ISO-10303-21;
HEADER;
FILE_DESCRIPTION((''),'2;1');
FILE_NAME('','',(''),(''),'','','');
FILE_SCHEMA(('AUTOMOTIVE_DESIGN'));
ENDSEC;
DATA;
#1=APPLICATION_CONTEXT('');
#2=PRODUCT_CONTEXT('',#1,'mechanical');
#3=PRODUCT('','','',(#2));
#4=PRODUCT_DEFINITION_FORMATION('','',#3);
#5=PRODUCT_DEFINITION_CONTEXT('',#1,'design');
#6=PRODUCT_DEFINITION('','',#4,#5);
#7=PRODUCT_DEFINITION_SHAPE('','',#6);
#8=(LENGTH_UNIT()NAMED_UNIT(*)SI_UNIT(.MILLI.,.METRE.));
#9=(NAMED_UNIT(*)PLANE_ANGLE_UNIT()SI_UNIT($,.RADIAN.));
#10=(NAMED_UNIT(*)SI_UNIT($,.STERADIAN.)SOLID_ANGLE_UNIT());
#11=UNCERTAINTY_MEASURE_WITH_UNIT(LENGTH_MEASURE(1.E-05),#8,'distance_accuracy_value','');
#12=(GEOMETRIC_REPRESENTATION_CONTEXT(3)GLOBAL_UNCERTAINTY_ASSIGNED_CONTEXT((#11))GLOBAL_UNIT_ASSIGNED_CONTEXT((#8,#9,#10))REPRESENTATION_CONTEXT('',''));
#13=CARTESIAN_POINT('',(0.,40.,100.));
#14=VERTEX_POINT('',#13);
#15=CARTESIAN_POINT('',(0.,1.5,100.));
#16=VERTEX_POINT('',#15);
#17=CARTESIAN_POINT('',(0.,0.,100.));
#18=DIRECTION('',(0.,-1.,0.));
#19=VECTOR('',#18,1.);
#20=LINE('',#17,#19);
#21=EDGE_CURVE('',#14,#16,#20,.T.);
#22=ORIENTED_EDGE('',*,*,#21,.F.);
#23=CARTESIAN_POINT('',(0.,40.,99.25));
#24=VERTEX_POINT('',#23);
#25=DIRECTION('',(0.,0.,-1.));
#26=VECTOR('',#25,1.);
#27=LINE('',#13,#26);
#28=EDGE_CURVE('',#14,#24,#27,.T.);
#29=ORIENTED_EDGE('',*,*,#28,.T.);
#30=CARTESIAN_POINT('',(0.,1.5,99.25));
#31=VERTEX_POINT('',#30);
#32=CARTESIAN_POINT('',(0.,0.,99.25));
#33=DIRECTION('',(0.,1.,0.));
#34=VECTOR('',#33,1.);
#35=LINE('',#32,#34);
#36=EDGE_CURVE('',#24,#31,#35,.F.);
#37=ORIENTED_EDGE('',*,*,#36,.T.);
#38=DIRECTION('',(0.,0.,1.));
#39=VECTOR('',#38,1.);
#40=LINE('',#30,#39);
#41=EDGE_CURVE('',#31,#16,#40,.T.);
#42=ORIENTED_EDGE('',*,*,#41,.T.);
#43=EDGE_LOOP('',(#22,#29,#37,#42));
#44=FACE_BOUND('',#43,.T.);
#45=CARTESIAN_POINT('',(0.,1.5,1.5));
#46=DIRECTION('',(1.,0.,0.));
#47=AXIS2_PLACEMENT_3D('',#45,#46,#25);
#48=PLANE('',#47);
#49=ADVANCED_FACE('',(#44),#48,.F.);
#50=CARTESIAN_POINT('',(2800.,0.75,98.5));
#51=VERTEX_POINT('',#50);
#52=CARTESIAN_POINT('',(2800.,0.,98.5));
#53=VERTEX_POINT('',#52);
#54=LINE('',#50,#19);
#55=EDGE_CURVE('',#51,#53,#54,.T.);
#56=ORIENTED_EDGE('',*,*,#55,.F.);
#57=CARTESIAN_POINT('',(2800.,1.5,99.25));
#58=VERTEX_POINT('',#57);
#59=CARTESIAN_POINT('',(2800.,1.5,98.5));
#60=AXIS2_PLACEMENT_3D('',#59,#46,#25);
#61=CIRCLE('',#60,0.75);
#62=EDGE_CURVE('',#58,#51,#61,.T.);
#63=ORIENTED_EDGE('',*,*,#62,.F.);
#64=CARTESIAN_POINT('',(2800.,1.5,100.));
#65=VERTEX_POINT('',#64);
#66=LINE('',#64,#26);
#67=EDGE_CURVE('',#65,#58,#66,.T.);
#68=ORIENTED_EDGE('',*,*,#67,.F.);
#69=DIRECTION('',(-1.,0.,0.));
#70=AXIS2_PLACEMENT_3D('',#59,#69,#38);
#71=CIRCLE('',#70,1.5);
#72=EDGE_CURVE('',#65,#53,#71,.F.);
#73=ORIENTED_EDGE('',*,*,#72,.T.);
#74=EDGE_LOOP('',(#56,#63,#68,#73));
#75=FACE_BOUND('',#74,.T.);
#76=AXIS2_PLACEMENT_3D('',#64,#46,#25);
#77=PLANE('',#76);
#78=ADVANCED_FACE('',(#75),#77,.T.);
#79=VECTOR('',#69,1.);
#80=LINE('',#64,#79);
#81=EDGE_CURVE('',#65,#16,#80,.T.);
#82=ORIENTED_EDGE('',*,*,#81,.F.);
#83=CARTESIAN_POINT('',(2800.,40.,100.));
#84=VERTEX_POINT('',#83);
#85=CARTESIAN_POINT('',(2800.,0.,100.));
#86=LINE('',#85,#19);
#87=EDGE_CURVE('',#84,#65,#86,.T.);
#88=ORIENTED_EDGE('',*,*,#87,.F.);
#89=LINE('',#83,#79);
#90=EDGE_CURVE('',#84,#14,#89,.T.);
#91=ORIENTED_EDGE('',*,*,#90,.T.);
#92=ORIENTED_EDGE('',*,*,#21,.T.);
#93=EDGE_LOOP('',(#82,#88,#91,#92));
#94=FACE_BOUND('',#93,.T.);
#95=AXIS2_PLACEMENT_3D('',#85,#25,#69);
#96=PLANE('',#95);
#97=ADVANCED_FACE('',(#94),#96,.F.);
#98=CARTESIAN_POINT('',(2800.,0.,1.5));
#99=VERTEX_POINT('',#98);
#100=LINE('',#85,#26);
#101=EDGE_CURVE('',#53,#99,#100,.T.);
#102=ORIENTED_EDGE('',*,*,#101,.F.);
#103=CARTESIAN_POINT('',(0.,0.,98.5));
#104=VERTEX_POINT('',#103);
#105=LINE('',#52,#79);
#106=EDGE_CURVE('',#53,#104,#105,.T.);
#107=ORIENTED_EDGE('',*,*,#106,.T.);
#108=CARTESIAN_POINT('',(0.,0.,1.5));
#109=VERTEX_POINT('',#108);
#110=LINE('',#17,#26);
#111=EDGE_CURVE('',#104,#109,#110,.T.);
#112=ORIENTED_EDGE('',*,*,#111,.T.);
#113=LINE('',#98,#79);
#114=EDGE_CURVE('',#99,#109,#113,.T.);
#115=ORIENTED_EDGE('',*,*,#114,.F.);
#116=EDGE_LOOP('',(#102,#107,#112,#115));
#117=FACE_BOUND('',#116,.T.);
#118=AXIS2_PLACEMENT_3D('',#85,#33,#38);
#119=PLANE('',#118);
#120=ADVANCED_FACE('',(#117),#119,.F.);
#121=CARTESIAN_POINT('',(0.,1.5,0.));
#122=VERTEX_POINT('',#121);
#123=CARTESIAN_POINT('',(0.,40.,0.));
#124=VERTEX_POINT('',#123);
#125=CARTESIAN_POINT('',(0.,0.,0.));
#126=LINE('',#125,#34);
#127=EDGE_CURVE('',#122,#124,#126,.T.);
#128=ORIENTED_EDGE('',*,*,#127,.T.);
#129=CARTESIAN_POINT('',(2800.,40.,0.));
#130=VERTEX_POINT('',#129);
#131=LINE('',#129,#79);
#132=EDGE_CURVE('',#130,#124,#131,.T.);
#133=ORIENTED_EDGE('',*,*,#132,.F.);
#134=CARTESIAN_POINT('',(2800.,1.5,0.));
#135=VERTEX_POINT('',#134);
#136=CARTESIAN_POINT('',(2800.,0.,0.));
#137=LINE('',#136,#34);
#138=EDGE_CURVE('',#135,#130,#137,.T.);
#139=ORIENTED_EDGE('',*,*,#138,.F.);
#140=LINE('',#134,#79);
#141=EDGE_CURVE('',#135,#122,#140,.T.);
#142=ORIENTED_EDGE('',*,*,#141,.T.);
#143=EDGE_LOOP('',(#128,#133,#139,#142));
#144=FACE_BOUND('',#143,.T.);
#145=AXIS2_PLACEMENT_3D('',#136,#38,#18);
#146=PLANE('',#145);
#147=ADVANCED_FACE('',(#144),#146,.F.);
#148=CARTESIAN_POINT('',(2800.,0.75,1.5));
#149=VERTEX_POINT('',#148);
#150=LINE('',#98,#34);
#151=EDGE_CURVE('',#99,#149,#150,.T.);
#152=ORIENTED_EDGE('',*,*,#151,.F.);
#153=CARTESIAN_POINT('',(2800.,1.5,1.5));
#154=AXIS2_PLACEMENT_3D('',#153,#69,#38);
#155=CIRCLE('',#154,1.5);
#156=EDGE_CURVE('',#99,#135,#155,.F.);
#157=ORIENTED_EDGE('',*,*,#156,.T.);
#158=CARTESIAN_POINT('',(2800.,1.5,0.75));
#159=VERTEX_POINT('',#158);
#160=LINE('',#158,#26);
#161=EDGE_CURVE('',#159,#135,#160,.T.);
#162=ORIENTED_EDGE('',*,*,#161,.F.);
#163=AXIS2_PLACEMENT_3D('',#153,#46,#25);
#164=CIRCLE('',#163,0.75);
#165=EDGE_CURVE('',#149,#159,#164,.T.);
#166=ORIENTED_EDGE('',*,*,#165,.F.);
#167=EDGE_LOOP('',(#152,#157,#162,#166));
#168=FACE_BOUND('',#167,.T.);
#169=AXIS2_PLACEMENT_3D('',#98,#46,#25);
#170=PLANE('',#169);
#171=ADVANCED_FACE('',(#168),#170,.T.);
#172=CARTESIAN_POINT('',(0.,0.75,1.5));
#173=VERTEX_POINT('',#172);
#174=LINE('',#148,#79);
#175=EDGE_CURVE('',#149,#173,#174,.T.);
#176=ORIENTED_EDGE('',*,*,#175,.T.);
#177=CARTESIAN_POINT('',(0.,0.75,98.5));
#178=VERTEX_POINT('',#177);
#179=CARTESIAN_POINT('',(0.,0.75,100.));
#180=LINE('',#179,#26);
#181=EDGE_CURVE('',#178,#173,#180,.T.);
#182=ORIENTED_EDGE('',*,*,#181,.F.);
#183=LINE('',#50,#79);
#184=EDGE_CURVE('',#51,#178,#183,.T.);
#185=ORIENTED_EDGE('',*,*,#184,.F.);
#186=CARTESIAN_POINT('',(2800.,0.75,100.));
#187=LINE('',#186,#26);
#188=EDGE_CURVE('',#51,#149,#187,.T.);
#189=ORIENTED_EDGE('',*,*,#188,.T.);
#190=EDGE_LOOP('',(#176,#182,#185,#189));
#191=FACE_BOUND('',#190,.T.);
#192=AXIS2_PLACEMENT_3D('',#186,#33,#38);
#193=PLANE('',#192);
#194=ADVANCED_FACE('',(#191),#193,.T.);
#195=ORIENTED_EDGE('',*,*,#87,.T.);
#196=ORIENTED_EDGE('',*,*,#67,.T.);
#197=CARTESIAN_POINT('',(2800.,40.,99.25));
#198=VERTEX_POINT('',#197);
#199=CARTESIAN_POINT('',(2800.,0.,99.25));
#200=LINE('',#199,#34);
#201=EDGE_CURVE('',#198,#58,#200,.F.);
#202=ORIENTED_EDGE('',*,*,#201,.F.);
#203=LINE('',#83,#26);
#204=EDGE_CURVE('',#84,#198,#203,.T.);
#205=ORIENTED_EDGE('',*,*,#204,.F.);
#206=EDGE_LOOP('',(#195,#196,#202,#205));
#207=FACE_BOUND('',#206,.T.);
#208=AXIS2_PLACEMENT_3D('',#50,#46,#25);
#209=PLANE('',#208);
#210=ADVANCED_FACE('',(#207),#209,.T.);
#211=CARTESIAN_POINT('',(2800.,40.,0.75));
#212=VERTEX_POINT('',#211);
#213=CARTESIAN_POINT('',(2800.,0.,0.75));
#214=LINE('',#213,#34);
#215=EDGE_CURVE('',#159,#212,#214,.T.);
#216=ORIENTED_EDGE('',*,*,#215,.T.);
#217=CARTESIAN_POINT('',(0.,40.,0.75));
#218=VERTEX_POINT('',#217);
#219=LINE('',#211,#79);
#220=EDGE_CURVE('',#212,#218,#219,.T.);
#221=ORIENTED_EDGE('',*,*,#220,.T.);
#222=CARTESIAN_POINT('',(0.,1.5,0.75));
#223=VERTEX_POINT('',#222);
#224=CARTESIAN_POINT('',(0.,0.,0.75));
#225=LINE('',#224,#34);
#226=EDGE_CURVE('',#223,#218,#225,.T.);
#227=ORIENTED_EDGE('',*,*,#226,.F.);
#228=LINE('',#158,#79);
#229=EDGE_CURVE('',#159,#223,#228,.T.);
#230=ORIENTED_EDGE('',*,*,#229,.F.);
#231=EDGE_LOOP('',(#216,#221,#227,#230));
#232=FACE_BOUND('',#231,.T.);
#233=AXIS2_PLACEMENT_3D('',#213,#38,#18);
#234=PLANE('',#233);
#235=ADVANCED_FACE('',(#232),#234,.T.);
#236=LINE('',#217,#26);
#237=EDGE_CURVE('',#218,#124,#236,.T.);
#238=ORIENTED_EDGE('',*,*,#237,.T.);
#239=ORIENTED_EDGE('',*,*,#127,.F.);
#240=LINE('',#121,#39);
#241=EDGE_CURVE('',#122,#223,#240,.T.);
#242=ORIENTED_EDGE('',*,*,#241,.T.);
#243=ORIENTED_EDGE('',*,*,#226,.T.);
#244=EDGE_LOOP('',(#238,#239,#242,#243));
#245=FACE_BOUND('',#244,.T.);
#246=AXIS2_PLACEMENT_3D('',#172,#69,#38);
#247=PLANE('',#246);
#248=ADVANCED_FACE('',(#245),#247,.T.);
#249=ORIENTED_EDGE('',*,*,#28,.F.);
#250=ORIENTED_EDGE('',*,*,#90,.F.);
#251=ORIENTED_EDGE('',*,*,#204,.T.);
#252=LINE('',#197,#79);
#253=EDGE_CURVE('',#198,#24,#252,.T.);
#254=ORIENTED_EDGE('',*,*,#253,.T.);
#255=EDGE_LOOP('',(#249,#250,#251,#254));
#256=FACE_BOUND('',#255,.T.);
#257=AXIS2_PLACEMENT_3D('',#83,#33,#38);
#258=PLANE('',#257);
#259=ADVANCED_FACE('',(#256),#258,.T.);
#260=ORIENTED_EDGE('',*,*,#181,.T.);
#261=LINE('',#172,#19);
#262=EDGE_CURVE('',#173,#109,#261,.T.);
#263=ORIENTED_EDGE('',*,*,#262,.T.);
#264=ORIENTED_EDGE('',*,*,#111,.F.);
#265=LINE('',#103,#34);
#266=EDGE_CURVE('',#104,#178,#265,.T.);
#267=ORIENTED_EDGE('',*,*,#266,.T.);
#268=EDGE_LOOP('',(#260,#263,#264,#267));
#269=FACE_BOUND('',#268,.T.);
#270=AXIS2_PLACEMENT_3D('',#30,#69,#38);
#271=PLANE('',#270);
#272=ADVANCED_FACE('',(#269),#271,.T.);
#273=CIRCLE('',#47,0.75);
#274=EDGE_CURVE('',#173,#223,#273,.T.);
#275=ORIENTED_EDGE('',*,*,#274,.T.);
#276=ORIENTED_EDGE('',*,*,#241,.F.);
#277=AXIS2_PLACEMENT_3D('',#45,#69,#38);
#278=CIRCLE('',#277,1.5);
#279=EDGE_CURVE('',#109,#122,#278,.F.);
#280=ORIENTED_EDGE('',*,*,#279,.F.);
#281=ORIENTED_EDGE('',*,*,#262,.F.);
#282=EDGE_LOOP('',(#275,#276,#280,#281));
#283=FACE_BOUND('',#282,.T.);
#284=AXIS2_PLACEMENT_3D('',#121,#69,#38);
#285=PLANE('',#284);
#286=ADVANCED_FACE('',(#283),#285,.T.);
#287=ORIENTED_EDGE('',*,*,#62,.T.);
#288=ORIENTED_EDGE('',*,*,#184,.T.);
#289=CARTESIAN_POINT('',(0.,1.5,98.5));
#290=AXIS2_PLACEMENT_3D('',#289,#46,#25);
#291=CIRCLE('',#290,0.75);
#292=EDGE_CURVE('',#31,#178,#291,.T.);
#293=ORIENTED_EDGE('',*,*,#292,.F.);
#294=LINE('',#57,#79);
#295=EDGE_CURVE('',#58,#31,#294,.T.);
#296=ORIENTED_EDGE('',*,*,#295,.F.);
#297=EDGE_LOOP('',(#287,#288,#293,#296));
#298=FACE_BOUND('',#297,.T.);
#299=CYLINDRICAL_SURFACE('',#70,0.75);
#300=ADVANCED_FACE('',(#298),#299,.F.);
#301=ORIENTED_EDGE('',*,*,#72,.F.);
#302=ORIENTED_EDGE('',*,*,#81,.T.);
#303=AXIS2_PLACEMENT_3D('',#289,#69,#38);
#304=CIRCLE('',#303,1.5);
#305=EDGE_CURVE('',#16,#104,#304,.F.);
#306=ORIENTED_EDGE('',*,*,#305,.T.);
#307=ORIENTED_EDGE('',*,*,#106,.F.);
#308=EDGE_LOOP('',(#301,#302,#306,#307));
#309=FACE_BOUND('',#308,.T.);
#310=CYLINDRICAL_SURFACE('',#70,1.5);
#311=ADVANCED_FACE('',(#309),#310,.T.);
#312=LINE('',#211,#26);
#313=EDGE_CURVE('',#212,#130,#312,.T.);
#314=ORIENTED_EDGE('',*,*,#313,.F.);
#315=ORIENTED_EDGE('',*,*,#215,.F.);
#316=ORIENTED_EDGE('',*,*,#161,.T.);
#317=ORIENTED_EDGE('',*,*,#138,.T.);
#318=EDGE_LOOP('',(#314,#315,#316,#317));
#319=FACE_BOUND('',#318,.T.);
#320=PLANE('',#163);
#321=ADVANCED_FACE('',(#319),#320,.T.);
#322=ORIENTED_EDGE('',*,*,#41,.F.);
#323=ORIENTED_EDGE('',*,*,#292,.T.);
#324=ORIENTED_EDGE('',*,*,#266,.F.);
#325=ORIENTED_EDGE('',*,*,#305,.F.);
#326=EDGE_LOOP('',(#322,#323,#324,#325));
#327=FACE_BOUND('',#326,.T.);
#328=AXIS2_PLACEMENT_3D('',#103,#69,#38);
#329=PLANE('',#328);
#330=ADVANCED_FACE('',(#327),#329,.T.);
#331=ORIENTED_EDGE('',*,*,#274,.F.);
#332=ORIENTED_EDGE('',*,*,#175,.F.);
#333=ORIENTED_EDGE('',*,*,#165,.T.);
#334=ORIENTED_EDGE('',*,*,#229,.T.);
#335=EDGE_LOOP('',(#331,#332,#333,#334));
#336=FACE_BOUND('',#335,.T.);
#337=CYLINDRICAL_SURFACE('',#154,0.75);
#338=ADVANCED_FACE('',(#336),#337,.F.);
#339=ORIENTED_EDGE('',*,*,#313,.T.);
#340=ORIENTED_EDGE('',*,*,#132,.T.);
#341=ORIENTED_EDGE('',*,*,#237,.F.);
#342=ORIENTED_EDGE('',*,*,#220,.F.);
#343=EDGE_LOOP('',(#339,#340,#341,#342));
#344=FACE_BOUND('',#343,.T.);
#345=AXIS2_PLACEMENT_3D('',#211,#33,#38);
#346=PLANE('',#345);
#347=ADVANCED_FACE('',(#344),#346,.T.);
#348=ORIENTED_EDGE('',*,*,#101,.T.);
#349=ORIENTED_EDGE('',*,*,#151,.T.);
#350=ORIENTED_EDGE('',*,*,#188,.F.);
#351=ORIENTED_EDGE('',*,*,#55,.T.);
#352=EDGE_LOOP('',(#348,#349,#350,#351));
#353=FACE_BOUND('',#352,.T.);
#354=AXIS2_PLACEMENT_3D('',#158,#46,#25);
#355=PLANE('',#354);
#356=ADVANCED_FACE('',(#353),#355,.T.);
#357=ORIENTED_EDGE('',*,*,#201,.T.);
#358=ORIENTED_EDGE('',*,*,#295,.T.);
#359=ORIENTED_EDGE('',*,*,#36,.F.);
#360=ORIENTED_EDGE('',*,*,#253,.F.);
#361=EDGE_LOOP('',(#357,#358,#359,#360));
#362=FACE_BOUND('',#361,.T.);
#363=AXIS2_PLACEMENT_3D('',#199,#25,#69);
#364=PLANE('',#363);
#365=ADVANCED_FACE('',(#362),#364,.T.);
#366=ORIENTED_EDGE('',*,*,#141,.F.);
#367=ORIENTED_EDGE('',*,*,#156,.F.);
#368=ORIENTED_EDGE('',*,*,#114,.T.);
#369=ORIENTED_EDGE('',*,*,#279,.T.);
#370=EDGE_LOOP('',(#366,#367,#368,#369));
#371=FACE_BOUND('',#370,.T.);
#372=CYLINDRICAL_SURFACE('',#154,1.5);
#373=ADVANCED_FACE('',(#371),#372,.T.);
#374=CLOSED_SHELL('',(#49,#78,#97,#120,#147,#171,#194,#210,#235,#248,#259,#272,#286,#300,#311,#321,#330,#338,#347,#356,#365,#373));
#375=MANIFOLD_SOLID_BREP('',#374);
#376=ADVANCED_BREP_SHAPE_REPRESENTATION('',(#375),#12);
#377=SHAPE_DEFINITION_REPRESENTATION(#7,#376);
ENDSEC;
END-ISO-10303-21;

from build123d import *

# Parameters (mm, degrees)
SM_BASE_FLANGE_1_DEPTH = 2800


# Sheet-metal steps are written as plain solids
with BuildPart() as part:
    # Sketch 1 → Базовая кромка1 (new body)
    with BuildSketch(Plane(origin=(0, 0, 0), x_dir=(0, 0, -1), z_dir=(1, 0, 0))):
        with BuildLine():
            Line((-100, 40), (-100, 1.5))
            ThreePointArc((-100, 1.5), (-99.560660172, 0.439339828), (-98.5, 0))
            Line((-98.5, 0), (-1.5, 0))
            ThreePointArc((-1.5, 0), (-0.439339828, 0.439339828), (0, 1.5))
            Line((0, 1.5), (0, 40))
            Line((0, 40), (-0.75, 40))
            Line((-0.75, 40), (-0.75, 1.5))
            ThreePointArc((-0.75, 1.5), (-0.969669914, 0.969669914), (-1.5, 0.75))
            Line((-1.5, 0.75), (-98.5, 0.75))
            ThreePointArc((-98.5, 0.75), (-99.030330086, 0.969669914), (-99.25, 1.5))
            Line((-99.25, 1.5), (-99.25, 40))
            Line((-99.25, 40), (-100, 40))
        make_face()
    extrude(amount=SM_BASE_FLANGE_1_DEPTH)


solid = part.part
